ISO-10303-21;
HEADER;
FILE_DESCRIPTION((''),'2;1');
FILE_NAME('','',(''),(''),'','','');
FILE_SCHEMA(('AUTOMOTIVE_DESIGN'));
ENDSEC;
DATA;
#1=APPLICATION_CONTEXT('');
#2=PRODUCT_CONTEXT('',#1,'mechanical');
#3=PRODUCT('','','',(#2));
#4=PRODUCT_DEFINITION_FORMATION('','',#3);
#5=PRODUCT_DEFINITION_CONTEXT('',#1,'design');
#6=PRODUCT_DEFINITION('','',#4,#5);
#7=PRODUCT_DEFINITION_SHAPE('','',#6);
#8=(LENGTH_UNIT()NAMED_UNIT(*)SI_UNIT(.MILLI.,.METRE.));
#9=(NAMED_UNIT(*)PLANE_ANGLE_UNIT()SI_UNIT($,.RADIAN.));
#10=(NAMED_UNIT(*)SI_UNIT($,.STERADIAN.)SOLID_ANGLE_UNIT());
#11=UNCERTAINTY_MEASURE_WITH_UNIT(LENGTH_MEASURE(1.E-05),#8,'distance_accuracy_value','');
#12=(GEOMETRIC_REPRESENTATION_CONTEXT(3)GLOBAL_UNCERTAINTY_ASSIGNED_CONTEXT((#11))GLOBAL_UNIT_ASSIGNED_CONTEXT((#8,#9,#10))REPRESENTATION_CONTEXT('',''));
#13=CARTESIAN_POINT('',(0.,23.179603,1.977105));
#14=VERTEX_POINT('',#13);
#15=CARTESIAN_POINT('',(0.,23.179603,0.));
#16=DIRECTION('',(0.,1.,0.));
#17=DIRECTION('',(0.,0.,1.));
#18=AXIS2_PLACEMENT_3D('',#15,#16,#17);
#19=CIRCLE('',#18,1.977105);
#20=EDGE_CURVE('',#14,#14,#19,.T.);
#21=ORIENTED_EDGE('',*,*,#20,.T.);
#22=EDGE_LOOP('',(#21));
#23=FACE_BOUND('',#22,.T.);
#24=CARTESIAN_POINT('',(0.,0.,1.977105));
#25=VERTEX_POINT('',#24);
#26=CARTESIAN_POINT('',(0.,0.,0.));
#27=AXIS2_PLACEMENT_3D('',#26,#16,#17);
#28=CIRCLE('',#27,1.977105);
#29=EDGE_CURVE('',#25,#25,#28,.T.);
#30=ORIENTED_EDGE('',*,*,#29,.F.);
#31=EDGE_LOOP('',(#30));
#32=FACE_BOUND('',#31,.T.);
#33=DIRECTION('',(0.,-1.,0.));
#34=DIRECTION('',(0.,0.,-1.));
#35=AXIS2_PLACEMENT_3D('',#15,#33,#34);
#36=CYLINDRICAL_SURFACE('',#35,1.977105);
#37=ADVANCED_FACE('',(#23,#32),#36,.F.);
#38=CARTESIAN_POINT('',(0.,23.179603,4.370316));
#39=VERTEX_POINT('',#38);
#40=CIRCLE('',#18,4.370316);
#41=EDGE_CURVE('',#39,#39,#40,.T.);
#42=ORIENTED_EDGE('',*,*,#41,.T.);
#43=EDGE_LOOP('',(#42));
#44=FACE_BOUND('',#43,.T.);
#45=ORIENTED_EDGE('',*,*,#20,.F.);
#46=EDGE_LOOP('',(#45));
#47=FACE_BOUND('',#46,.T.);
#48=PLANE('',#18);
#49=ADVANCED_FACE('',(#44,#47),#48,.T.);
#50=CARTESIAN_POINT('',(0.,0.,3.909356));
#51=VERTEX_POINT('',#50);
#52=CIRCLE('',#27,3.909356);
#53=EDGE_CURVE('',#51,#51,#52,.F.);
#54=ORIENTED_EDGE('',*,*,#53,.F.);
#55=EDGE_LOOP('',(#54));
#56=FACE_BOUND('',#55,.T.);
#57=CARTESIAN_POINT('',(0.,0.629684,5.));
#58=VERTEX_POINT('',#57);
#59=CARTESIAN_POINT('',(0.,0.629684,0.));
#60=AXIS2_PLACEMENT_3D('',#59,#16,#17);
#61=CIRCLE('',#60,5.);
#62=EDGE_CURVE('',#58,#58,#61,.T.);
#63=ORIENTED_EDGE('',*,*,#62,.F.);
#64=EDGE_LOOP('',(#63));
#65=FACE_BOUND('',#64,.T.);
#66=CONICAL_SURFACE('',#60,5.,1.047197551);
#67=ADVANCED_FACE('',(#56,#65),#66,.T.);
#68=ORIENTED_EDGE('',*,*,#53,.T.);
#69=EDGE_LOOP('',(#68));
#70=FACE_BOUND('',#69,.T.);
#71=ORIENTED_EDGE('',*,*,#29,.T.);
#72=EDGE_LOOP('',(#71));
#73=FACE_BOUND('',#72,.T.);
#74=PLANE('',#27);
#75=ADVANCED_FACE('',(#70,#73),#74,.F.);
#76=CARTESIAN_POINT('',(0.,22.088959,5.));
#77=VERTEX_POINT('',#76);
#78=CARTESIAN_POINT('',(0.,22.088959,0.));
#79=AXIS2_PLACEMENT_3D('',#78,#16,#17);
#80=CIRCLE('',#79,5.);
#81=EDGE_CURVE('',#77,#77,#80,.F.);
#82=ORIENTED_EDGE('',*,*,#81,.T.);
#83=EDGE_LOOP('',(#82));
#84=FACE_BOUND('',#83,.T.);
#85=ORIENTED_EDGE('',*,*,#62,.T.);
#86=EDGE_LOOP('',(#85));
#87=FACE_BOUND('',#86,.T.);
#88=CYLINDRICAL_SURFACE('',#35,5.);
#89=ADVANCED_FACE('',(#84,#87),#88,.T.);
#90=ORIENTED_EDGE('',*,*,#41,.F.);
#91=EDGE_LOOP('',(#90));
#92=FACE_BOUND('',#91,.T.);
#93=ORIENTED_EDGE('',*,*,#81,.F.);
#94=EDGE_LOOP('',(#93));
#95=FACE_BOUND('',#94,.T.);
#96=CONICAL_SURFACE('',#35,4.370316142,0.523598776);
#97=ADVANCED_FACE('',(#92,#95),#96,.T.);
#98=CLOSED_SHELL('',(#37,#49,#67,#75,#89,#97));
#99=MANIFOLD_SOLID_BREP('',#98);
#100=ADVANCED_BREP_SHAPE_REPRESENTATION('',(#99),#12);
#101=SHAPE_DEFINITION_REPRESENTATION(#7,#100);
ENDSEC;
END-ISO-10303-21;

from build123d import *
from OCP.BRepFilletAPI import BRepFilletAPI_MakeChamfer

# Parameters (mm, degrees)
SKETCH1_R           = 5
BOSS_EXTRUDE1_DEPTH = 23.179603195
SKETCH2_R           = 1.977104771
CUT_EXTRUDE1_DEPTH  = 25.234149547
CHAMFER1_SIZE       = 1.090644435
CHAMFER1_SIZE2      = 0.629683858


with BuildPart() as part:
    # Sketch1 → Boss-Extrude1 (new body)
    with BuildSketch(Plane(origin=(0, 0, 0), x_dir=(1, 0, 0), z_dir=(0, 1, 0))):
        Circle(SKETCH1_R)
    extrude(amount=BOSS_EXTRUDE1_DEPTH)

    # Sketch2 → Cut-Extrude1 (cut, through all)
    with BuildSketch(Plane(origin=(0, 0, 0), x_dir=(1, 0, 0), z_dir=(0, 1, 0))):
        Circle(SKETCH2_R)
    extrude(amount=CUT_EXTRUDE1_DEPTH, mode=Mode.SUBTRACT)

    # Chamfer1: one chamfer whose edges measure the first distance from different faces: ONE call of the kernel's chamfer builder (chamfer() names one face for all edges)
    chamfer1_edges_1 = [part.edges().sort_by_distance(p)[0] for p in [
        (-5, 23.179603195, 0),
    ]]
    chamfer1_side_1 = [part.faces().sort_by_distance(p)[0] for p in [
        (-5, 11.589801598, 0),
    ]]
    chamfer1_edges_2 = [part.edges().sort_by_distance(p)[0] for p in [
        (-5, 0, 0),
    ]]
    chamfer1_side_2 = [part.faces().sort_by_distance(p)[0] for p in [
        (-4.858578644, 0, 0),
    ]]
    chamfer1 = BRepFilletAPI_MakeChamfer(part.part.solid().wrapped)
    for e in chamfer1_edges_1:
        chamfer1.Add(CHAMFER1_SIZE, CHAMFER1_SIZE2, e.wrapped, chamfer1_side_1[0].wrapped)  # the first distance lies on this face
    for e in chamfer1_edges_2:
        chamfer1.Add(CHAMFER1_SIZE, CHAMFER1_SIZE2, e.wrapped, chamfer1_side_2[0].wrapped)  # the first distance lies on this face
    add(Compound.cast(chamfer1.Shape()), mode=Mode.REPLACE)


solid = part.part
